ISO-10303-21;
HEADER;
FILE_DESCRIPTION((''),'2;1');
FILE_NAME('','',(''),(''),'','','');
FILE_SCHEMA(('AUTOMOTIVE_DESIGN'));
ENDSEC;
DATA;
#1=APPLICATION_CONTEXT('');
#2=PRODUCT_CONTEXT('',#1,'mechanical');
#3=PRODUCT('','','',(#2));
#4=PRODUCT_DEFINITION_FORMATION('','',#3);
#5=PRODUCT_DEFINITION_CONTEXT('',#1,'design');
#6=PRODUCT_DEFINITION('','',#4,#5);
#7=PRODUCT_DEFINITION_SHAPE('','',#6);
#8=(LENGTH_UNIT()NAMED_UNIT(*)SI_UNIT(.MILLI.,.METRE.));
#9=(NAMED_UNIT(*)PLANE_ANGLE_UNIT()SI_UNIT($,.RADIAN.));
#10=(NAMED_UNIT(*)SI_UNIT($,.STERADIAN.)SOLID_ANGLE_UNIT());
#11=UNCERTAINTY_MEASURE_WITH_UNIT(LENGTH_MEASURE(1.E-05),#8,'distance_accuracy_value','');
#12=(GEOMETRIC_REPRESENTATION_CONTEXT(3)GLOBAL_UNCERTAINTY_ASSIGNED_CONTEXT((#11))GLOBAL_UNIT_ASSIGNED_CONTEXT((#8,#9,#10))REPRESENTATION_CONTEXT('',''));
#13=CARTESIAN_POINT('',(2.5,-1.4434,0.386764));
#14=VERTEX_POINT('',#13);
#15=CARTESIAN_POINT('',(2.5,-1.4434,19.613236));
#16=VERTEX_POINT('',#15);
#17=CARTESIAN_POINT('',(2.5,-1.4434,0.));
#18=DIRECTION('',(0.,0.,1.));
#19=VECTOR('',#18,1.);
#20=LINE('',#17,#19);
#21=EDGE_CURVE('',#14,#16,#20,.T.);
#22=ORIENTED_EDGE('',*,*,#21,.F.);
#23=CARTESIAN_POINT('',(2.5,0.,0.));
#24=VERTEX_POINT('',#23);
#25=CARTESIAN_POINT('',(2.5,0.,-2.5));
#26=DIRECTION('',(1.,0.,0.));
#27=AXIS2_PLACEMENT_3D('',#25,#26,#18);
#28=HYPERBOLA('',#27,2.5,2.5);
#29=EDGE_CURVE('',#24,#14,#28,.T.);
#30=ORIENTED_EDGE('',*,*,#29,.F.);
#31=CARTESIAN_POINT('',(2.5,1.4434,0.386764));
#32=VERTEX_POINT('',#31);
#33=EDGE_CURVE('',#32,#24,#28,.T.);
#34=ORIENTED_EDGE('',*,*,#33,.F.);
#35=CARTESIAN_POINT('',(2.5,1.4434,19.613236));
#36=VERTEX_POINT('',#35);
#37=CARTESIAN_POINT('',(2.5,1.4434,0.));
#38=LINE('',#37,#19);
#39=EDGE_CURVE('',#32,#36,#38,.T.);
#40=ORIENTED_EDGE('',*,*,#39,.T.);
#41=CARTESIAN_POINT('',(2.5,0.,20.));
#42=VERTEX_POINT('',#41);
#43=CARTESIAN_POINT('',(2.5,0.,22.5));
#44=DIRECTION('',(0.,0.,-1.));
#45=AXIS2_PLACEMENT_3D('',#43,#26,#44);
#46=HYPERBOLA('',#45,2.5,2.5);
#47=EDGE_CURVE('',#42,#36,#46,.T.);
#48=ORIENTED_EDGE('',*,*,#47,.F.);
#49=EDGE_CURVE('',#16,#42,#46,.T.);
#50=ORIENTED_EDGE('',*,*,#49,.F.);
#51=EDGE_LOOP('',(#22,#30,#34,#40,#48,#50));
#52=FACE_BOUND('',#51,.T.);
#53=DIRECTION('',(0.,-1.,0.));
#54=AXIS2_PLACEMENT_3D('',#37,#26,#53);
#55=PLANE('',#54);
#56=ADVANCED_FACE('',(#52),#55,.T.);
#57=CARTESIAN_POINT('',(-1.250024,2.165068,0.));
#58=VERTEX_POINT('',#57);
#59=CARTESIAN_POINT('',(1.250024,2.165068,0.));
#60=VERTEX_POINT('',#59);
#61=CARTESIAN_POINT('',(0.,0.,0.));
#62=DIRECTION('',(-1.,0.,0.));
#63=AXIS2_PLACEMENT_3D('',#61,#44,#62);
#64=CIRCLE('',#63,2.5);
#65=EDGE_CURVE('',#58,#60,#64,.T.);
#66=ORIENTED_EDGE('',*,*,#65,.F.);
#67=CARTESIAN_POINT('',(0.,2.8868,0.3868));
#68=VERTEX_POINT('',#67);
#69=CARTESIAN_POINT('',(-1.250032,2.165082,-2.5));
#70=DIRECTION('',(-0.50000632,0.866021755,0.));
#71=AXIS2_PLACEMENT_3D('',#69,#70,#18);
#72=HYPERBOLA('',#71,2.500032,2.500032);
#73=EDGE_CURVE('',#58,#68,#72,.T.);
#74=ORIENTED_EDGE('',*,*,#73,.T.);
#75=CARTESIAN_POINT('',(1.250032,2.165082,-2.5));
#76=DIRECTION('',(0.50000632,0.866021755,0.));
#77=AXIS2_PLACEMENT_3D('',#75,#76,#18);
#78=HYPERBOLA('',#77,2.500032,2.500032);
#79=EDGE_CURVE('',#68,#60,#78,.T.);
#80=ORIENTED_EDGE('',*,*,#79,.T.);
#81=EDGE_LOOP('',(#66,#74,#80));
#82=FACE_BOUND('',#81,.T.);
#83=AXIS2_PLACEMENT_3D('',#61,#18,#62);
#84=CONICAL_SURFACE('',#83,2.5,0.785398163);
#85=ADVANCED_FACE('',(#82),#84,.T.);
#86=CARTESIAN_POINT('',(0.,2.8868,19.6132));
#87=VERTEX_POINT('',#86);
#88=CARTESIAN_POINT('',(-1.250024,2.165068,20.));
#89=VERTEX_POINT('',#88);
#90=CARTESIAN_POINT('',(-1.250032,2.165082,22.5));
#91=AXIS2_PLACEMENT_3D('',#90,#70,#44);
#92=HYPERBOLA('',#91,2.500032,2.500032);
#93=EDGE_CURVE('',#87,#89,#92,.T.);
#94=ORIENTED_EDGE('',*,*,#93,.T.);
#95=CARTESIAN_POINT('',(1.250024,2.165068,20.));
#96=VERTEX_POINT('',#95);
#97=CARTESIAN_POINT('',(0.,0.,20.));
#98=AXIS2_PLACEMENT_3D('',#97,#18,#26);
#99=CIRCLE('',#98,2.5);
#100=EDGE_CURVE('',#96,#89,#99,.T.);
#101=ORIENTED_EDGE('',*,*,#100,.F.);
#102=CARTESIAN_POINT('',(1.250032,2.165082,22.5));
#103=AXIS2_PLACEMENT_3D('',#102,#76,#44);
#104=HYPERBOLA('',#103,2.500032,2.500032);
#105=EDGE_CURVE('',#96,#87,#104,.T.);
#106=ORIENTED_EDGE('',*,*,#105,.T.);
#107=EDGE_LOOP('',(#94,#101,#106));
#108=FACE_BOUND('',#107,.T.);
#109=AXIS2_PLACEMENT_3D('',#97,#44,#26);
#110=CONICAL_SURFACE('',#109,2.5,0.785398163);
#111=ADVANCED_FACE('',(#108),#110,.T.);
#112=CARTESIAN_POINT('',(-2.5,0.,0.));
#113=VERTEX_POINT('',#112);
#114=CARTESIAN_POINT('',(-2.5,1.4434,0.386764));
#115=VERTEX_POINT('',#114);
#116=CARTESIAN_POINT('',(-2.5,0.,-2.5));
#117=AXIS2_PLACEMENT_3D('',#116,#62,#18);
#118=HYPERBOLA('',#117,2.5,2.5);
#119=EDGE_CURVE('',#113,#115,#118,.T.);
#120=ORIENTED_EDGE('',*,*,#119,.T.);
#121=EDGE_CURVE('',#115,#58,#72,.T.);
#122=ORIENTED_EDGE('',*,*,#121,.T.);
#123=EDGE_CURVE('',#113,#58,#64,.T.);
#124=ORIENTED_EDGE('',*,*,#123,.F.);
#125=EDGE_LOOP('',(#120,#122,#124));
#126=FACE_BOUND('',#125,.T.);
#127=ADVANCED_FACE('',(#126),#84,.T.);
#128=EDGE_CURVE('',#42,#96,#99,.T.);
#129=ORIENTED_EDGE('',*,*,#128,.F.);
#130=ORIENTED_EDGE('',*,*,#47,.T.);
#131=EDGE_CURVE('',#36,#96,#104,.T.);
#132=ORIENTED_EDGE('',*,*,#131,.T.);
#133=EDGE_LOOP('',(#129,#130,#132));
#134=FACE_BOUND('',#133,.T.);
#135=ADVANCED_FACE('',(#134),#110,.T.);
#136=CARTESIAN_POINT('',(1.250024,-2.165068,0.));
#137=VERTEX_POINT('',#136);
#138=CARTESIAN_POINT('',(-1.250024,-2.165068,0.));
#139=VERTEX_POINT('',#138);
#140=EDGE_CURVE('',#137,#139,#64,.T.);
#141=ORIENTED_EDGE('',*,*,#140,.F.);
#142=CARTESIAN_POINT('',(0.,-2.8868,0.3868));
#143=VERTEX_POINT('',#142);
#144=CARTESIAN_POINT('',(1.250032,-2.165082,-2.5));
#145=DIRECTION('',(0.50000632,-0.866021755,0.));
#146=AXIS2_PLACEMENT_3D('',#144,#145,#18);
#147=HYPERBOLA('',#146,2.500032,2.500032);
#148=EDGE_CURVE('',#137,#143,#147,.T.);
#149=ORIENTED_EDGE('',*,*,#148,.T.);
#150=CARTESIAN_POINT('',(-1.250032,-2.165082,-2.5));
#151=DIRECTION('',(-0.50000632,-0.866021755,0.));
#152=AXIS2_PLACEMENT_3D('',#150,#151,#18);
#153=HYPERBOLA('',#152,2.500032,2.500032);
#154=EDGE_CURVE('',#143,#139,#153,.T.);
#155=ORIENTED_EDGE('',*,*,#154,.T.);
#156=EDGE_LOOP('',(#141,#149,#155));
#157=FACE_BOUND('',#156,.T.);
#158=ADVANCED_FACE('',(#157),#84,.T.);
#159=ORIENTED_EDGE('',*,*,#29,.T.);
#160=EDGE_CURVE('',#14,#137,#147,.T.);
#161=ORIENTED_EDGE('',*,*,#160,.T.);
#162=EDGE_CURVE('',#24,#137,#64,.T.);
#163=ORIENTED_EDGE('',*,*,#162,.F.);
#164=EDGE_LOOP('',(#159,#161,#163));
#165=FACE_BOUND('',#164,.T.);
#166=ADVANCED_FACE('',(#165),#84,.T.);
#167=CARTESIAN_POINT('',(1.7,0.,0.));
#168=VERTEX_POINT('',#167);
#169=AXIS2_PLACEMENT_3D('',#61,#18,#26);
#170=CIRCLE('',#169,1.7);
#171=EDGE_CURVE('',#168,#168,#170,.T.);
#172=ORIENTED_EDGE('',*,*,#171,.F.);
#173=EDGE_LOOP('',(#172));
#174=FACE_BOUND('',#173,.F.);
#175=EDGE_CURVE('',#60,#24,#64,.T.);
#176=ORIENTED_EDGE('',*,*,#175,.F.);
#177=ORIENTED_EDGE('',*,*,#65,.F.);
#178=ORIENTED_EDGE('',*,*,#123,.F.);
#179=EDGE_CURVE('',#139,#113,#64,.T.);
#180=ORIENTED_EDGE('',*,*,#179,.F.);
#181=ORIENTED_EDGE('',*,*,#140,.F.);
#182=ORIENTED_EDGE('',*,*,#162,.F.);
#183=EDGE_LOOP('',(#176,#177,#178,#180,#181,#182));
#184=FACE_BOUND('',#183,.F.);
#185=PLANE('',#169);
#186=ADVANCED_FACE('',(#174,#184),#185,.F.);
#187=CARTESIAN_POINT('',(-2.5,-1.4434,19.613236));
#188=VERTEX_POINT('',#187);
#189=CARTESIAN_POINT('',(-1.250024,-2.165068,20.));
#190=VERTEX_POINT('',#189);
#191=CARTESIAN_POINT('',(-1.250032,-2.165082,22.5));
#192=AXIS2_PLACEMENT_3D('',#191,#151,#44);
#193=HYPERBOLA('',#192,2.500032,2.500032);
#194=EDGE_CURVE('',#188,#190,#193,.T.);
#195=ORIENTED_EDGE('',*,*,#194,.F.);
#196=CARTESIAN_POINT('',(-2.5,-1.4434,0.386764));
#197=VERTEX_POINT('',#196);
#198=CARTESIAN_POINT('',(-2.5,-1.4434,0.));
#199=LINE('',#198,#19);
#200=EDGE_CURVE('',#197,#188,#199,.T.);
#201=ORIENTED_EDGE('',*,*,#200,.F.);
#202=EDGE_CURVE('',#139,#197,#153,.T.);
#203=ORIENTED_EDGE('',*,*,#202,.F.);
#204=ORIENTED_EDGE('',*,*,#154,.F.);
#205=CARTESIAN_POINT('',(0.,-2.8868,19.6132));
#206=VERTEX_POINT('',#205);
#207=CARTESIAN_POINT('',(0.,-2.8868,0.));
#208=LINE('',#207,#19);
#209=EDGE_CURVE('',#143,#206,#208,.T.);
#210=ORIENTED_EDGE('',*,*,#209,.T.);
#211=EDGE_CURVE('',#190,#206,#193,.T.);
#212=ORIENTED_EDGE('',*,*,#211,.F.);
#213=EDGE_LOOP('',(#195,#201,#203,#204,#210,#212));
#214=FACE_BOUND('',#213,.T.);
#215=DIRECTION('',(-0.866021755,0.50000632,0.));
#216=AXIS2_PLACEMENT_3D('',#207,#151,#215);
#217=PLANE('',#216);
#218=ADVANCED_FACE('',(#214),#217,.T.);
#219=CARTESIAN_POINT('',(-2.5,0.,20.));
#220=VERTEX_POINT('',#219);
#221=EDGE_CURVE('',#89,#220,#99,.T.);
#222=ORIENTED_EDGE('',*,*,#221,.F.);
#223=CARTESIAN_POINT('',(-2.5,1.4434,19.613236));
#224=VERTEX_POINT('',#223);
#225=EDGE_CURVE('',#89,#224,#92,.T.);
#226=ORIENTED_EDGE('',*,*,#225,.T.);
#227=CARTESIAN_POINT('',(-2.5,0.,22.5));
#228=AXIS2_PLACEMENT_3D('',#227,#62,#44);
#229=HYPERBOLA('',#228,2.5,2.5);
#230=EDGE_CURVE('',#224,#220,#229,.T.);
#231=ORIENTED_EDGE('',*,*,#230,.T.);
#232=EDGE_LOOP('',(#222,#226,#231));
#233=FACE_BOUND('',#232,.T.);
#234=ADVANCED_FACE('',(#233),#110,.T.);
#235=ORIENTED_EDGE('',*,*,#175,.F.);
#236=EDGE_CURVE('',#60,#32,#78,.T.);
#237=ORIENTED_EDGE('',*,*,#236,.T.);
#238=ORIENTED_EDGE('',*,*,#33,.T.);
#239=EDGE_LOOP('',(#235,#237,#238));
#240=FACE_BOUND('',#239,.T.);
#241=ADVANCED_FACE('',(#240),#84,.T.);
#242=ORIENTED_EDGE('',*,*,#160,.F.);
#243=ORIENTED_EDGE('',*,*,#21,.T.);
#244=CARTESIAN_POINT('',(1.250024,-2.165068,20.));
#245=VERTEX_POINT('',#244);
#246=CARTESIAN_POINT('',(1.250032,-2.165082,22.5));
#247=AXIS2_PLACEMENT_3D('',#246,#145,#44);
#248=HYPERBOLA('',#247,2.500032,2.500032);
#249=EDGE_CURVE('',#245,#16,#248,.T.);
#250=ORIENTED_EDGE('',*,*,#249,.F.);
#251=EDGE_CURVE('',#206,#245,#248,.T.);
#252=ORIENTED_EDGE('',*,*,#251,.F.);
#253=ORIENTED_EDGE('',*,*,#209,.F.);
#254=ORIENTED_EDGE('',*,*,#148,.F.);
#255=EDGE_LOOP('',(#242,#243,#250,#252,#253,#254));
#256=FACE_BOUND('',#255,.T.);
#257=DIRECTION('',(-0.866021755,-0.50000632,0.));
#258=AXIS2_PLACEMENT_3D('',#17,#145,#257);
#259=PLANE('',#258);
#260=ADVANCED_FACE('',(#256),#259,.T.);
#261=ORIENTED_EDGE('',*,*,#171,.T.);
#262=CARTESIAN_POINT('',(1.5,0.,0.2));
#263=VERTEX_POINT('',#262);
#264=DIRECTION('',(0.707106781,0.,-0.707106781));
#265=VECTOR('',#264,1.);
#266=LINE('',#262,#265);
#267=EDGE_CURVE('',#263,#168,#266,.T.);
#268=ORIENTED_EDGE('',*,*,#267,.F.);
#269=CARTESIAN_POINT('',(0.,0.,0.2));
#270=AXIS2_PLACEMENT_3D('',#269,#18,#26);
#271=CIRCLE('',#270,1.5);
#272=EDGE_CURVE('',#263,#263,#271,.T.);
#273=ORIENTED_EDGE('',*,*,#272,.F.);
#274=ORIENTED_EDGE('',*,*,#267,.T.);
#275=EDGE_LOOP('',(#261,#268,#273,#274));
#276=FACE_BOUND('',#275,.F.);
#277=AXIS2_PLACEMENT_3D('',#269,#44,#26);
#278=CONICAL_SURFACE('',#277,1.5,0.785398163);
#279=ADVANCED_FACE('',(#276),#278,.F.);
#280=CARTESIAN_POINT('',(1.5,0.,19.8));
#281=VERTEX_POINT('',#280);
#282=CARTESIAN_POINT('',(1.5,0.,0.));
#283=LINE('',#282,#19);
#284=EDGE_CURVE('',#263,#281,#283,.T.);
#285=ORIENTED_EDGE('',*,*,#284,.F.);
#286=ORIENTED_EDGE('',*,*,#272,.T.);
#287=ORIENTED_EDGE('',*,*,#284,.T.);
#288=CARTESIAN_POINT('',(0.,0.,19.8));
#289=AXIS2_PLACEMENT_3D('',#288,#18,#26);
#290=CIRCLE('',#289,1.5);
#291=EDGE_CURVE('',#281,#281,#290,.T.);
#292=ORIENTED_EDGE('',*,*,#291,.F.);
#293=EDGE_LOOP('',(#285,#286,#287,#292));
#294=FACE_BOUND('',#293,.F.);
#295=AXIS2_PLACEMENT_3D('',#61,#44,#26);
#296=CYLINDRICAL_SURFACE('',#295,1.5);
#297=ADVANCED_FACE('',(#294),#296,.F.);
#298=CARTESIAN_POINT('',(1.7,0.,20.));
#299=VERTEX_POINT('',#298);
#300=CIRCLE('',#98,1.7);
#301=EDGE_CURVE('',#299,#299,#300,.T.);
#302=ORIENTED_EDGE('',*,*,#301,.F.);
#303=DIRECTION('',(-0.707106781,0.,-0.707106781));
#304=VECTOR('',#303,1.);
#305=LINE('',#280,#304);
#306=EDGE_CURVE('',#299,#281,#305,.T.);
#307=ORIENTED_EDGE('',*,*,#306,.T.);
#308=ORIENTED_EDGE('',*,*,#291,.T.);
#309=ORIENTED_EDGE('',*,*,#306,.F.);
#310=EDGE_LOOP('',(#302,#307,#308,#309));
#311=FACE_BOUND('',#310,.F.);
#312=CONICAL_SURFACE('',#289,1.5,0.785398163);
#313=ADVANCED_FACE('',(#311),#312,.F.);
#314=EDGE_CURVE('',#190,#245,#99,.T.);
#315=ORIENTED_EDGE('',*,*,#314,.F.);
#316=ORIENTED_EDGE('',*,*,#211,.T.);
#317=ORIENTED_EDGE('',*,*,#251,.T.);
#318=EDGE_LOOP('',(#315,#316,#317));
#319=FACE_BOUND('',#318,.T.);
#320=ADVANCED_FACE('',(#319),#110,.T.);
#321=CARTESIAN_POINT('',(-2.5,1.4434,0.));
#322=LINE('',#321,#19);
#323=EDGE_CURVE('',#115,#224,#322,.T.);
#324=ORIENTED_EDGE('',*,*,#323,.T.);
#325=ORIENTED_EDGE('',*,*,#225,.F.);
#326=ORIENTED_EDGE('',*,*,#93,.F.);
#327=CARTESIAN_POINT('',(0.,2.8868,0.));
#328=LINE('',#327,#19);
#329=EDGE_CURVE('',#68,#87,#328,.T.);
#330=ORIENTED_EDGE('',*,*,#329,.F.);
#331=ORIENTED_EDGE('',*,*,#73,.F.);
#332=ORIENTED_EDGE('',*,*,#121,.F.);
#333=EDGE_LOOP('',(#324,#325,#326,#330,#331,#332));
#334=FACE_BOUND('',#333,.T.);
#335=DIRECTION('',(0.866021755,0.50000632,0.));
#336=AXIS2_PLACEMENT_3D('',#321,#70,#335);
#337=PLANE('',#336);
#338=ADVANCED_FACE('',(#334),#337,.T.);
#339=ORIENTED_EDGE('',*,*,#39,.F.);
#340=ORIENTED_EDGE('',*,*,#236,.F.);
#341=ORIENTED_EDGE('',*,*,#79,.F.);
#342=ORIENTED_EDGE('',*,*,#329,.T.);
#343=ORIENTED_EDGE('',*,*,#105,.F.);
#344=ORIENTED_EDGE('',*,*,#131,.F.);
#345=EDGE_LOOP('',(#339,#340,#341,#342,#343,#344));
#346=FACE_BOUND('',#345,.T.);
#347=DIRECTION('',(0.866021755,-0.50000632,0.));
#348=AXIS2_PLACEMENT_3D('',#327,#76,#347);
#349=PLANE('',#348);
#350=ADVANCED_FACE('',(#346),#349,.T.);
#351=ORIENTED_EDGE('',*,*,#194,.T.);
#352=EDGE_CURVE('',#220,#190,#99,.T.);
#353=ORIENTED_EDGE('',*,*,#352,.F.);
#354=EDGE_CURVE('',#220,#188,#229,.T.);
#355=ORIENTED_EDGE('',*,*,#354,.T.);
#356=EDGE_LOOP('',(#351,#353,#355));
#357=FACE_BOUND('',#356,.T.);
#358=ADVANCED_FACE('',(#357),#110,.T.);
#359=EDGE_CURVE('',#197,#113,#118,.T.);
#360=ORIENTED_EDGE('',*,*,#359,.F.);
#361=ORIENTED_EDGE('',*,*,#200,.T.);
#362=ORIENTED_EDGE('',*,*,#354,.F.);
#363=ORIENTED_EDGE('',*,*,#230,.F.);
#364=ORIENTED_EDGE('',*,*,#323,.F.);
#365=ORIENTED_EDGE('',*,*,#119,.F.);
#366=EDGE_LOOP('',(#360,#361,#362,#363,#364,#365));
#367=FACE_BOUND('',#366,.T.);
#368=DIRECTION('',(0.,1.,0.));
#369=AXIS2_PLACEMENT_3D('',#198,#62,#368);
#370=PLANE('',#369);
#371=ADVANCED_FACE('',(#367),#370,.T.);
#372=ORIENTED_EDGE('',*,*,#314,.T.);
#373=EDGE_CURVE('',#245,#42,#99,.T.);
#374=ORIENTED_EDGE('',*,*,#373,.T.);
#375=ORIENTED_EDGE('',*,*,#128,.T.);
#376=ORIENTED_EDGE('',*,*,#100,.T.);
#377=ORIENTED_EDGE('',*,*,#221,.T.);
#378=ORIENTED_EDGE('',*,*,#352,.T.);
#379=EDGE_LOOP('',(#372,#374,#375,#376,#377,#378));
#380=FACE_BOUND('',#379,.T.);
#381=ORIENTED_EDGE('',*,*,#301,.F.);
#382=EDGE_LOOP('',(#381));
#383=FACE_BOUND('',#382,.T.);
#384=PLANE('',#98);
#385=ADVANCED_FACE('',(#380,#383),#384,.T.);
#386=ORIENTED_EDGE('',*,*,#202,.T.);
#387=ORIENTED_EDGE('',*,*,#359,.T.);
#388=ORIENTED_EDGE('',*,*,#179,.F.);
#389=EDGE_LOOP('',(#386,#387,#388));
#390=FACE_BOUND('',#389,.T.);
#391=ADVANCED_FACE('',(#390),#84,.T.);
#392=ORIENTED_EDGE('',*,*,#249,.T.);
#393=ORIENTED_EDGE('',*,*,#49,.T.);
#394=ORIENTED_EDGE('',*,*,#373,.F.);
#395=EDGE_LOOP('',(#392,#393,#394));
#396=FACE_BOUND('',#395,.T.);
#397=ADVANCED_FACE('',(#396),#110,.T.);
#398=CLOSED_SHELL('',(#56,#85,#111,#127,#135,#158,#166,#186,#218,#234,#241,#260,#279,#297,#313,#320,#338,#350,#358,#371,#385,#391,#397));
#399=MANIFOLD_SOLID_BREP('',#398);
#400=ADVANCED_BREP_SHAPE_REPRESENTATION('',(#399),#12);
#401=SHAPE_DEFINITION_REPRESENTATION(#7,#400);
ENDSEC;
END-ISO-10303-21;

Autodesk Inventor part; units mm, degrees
ref_plane "YZ Plane" through (0, 0, 0) normal (1, 0, 0) x (0, 1, 0)
ref_plane "XZ Plane" through (0, 0, 0) normal (0, 1, 0) x (-1, 0, 0)
ref_plane "XY Plane" through (0, 0, 0) normal (0, 0, 1) x (1, 0, 0)
sketch "Náčrt1" plane through (0, 0, 0) normal (0, 0, 1) x (1, 0, 0)
  line L0 (2.5, -1.4434) -> (0, -2.8868)
  line L1 (0, -2.8868) -> (-2.5, -1.4434)
  line L2 (-2.5, -1.4434) -> (-2.5, 1.4434)
  line L3 (-2.5, 1.4434) -> (0, 2.8868)
  line L4 (0, 2.8868) -> (2.5, 1.4434)
  line L5 (2.5, 1.4434) -> (2.5, -1.4434)
  circle A0 centre (0, 0) radius 1.5
  point P0 (2.5, 0)
  dimension "d1" = 3
  dimension "d16" = 5
extrude "Vysunutí1" add sketch "Náčrt1" along normal blind 20
thread "Závit1" size "M3x0.5" class "6H" standard "ANSI Metric M Profile" full length
sketch "Náčrt2" plane through (0, 0, 20) normal (0, 0, 1) x (1, 0, 0)
  circle A0 centre (0, 0) radius 2.5
  dimension "d18" = 5
extrude "Vysunutí2" cut sketch "Náčrt2" against normal through all draft 45 keep common part
sketch "Náčrt3" plane through (0, 0, 0) normal (0, 0, -1) x (-1, 0, 0)
  circle A0 centre (0, 0) radius 2.5
  dimension "d17" = 5
extrude "Vysunutí3" cut sketch "Náčrt3" against normal through all draft 45 keep common part
chamfer "Zkosení1" distance 0.2 angle 45 1 edges at (-1.5, 0, 20)
chamfer "Zkosení2" distance 0.2 angle 45 1 edges at (-1.5, 0, 0)
properties part number "PillarBolt-M3x20" material "Ocel, vysokopevnostní, nízkolegovaná"
